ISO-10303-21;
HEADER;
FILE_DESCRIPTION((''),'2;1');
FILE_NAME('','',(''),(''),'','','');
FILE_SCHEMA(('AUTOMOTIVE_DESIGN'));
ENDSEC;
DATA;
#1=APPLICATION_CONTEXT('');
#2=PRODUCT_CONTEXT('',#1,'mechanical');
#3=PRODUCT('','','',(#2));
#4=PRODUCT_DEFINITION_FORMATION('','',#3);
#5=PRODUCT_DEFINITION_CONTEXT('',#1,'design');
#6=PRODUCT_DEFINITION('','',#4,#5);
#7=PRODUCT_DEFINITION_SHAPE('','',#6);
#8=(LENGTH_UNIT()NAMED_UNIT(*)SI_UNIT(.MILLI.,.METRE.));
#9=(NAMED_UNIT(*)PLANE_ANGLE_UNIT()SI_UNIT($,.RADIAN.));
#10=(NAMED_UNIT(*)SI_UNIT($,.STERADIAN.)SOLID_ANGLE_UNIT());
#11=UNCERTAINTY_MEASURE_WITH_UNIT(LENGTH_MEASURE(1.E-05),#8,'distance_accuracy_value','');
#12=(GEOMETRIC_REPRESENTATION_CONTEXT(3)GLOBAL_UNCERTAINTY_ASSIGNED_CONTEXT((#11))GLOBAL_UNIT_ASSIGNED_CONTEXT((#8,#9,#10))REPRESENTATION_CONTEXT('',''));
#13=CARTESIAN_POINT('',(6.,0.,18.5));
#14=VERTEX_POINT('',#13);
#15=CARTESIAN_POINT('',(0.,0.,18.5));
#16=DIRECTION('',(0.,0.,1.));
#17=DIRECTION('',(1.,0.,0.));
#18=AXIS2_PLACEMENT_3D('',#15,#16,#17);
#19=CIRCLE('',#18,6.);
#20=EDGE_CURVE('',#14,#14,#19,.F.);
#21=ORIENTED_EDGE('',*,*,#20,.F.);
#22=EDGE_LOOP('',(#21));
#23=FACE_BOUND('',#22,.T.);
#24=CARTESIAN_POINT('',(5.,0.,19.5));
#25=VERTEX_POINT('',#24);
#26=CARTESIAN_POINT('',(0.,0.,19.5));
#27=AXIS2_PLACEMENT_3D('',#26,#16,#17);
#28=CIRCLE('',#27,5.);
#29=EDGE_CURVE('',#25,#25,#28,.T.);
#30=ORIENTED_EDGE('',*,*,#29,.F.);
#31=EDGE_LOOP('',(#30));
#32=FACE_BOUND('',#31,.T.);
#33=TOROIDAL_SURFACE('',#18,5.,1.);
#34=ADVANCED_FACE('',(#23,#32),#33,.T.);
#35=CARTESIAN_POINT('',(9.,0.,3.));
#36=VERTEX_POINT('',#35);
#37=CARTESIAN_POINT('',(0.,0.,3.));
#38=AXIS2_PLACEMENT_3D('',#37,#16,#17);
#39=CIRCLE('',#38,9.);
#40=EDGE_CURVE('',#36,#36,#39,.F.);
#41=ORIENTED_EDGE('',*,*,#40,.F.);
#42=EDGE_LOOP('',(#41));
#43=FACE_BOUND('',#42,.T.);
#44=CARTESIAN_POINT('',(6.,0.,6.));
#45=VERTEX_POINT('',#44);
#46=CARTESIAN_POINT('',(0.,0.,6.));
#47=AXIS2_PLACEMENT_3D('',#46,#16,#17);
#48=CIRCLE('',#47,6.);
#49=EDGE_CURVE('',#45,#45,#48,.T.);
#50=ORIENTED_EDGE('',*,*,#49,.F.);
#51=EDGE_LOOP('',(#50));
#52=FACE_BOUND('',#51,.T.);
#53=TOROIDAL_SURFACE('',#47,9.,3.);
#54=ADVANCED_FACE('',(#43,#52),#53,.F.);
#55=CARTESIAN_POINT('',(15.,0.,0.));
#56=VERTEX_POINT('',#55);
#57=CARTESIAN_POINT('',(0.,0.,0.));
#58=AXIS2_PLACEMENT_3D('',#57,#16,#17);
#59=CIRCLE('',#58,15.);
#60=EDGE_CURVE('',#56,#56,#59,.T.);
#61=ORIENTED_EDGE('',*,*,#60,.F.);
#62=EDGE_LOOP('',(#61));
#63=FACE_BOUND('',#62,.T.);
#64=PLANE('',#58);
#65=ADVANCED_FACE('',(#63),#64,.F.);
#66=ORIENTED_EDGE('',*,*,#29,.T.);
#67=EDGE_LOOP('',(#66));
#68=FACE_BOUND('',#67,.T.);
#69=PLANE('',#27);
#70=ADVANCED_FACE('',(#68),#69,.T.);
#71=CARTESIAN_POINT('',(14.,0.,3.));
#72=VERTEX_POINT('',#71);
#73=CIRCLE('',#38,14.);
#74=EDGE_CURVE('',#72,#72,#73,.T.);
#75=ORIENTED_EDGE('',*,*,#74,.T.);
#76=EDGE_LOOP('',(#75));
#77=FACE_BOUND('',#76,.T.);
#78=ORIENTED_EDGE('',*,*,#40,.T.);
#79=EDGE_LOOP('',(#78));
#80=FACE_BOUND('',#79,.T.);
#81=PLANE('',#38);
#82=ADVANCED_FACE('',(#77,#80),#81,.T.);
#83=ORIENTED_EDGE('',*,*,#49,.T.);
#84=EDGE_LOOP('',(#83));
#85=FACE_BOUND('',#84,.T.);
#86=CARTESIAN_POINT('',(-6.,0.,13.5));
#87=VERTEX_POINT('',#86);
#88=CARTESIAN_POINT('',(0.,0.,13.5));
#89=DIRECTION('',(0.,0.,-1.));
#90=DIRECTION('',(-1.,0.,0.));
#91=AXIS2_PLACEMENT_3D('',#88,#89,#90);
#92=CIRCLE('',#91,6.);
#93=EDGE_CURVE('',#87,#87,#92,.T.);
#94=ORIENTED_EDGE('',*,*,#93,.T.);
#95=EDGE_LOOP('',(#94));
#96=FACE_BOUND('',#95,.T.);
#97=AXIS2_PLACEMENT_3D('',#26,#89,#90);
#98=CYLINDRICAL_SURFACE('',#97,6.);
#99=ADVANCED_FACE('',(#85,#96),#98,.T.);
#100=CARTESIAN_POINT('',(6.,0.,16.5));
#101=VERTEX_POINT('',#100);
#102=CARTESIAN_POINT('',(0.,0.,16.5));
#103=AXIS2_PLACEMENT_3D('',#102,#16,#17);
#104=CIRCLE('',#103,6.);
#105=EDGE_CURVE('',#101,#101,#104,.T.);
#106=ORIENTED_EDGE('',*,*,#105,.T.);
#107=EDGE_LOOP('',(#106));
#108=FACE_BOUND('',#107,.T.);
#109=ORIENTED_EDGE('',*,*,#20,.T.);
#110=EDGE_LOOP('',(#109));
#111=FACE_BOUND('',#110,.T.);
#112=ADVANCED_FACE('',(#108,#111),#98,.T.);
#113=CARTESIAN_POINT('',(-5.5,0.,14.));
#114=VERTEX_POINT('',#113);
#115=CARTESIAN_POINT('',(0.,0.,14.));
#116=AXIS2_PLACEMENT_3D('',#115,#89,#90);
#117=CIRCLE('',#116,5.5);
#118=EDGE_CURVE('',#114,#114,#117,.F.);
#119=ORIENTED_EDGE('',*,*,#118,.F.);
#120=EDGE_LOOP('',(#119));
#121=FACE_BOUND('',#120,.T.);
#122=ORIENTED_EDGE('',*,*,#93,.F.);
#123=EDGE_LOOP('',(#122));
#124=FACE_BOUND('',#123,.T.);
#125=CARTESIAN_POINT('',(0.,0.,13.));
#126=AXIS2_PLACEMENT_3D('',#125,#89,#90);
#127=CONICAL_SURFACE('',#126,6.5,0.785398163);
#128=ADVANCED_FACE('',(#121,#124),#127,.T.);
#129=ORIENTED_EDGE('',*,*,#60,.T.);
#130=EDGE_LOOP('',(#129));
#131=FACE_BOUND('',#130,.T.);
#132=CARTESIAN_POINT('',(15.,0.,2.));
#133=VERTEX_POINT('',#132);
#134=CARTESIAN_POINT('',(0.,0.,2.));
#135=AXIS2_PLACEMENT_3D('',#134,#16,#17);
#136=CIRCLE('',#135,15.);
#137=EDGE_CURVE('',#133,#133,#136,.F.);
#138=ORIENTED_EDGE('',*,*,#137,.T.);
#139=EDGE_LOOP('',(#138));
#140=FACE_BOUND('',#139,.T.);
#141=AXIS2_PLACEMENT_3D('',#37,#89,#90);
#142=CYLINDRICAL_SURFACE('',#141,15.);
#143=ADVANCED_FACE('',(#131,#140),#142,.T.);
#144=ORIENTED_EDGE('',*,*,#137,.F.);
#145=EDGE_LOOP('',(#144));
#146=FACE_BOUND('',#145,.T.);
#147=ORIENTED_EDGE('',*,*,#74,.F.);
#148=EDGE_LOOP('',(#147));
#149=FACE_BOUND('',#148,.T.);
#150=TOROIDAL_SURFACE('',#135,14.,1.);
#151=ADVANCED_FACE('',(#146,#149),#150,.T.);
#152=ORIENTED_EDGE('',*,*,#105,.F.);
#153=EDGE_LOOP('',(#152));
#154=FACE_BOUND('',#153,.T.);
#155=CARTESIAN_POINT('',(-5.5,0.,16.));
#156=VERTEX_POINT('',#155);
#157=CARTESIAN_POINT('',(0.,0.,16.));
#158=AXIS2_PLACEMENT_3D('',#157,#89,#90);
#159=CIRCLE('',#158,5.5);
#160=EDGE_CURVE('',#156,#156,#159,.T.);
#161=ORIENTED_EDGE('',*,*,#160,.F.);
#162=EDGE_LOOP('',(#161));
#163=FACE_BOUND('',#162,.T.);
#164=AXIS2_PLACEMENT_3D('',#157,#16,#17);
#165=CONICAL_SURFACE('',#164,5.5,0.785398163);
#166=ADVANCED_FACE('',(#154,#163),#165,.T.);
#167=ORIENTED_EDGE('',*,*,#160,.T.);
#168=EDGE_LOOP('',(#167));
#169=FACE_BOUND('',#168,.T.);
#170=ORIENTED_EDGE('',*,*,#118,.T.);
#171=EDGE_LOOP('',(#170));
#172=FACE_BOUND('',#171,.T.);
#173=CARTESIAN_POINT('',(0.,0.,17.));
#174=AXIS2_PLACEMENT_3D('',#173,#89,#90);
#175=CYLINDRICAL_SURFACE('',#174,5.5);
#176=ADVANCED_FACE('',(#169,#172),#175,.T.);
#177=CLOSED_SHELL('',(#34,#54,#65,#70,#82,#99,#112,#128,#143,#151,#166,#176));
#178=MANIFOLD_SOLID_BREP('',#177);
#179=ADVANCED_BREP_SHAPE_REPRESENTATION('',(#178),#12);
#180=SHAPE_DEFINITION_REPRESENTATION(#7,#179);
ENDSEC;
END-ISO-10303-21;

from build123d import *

# Parameters (mm, degrees)
SKETCH_1_R          = 15
EXTRUDE_1_DEPTH     = 3
SKETCH_2_R          = 6
EXTRUDE_2_DEPTH     = 16.5
FILLET_1_R          = 3
FILLET_2_R          = 1
FILLET_3_R          = 1
SKETCH_3_R          = 6
SKETCH_3_R_2        = 5.5
CUT_EXTRUDE_1_DEPTH = 4
CHAMFER_1_SIZE      = 1


with BuildPart() as part:
    # 草图1 → 凸台-拉伸1 (new body)
    with BuildSketch(Plane.XY):
        Circle(SKETCH_1_R)
    extrude(amount=EXTRUDE_1_DEPTH)

    # 草图2 → 凸台-拉伸2 (add)
    with BuildSketch(Plane.XY.offset(3)):
        Circle(SKETCH_2_R)
    extrude(amount=EXTRUDE_2_DEPTH)

    # 圆角1
    fillet_1_edges = [part.edges().sort_by_distance(p)[0] for p in [
        (-6, 0, 3),
    ]]
    fillet(fillet_1_edges, radius=FILLET_1_R)

    # 圆角2
    fillet_2_edges = [part.edges().sort_by_distance(p)[0] for p in [
        (-15, 0, 3),
    ]]
    fillet(fillet_2_edges, radius=FILLET_2_R)

    # 圆角3
    fillet_3_edges = [part.edges().sort_by_distance(p)[0] for p in [
        (-6, 0, 19.5),
    ]]
    fillet(fillet_3_edges, radius=FILLET_3_R)

    # 草图3 → 切除-拉伸1 (cut)
    with BuildSketch(Plane(origin=(0, 0, 13), x_dir=(-1, 0, 0), z_dir=(0, 0, -1))):
        Circle(SKETCH_3_R)
        Circle(SKETCH_3_R_2, mode=Mode.SUBTRACT)
    extrude(amount=-CUT_EXTRUDE_1_DEPTH, mode=Mode.SUBTRACT)

    # 倒角1
    # the kernel refuses this chamfer: 1 mm, written as the material it adds along each edge
    with BuildSketch(Plane(origin=(0, 0, 13), x_dir=(-1, 0, 0), z_dir=(0, -1, 0))) as chamfer_1_piece_1_section:
        Polygon((5.5 + CHAMFER_1_SIZE, 0), (5.5, -CHAMFER_1_SIZE), (5.5, 0), align=None)
    chamfer_1_piece_1 = revolve(axis=Axis((0, 0, 13), (0, 0, -1)), mode=Mode.PRIVATE)
    chamfer_1_piece_1 = chamfer_1_piece_1 & Plane(origin=(0, 0, 13.746832488), x_dir=(1, 0, 0), z_dir=(0, 0, -1)) * Cylinder(6, 26, mode=Mode.PRIVATE)
    add(chamfer_1_piece_1)
    with BuildSketch(Plane(origin=(0, 0, 17), x_dir=(-1, 0, 0), z_dir=(0, -1, 0))) as chamfer_1_piece_2_section:
        Polygon((5.5, CHAMFER_1_SIZE), (5.5 + CHAMFER_1_SIZE, 0), (5.5, 0), align=None)
    chamfer_1_piece_2 = revolve(axis=Axis((0, 0, 17), (0, 0, -1)), mode=Mode.PRIVATE)
    chamfer_1_piece_2 = chamfer_1_piece_2 & Plane(origin=(0, 0, 16.253167512), x_dir=(1, 0, 0), z_dir=(0, 0, -1)) * Cylinder(6, 26, mode=Mode.PRIVATE)
    add(chamfer_1_piece_2)


solid = part.part
